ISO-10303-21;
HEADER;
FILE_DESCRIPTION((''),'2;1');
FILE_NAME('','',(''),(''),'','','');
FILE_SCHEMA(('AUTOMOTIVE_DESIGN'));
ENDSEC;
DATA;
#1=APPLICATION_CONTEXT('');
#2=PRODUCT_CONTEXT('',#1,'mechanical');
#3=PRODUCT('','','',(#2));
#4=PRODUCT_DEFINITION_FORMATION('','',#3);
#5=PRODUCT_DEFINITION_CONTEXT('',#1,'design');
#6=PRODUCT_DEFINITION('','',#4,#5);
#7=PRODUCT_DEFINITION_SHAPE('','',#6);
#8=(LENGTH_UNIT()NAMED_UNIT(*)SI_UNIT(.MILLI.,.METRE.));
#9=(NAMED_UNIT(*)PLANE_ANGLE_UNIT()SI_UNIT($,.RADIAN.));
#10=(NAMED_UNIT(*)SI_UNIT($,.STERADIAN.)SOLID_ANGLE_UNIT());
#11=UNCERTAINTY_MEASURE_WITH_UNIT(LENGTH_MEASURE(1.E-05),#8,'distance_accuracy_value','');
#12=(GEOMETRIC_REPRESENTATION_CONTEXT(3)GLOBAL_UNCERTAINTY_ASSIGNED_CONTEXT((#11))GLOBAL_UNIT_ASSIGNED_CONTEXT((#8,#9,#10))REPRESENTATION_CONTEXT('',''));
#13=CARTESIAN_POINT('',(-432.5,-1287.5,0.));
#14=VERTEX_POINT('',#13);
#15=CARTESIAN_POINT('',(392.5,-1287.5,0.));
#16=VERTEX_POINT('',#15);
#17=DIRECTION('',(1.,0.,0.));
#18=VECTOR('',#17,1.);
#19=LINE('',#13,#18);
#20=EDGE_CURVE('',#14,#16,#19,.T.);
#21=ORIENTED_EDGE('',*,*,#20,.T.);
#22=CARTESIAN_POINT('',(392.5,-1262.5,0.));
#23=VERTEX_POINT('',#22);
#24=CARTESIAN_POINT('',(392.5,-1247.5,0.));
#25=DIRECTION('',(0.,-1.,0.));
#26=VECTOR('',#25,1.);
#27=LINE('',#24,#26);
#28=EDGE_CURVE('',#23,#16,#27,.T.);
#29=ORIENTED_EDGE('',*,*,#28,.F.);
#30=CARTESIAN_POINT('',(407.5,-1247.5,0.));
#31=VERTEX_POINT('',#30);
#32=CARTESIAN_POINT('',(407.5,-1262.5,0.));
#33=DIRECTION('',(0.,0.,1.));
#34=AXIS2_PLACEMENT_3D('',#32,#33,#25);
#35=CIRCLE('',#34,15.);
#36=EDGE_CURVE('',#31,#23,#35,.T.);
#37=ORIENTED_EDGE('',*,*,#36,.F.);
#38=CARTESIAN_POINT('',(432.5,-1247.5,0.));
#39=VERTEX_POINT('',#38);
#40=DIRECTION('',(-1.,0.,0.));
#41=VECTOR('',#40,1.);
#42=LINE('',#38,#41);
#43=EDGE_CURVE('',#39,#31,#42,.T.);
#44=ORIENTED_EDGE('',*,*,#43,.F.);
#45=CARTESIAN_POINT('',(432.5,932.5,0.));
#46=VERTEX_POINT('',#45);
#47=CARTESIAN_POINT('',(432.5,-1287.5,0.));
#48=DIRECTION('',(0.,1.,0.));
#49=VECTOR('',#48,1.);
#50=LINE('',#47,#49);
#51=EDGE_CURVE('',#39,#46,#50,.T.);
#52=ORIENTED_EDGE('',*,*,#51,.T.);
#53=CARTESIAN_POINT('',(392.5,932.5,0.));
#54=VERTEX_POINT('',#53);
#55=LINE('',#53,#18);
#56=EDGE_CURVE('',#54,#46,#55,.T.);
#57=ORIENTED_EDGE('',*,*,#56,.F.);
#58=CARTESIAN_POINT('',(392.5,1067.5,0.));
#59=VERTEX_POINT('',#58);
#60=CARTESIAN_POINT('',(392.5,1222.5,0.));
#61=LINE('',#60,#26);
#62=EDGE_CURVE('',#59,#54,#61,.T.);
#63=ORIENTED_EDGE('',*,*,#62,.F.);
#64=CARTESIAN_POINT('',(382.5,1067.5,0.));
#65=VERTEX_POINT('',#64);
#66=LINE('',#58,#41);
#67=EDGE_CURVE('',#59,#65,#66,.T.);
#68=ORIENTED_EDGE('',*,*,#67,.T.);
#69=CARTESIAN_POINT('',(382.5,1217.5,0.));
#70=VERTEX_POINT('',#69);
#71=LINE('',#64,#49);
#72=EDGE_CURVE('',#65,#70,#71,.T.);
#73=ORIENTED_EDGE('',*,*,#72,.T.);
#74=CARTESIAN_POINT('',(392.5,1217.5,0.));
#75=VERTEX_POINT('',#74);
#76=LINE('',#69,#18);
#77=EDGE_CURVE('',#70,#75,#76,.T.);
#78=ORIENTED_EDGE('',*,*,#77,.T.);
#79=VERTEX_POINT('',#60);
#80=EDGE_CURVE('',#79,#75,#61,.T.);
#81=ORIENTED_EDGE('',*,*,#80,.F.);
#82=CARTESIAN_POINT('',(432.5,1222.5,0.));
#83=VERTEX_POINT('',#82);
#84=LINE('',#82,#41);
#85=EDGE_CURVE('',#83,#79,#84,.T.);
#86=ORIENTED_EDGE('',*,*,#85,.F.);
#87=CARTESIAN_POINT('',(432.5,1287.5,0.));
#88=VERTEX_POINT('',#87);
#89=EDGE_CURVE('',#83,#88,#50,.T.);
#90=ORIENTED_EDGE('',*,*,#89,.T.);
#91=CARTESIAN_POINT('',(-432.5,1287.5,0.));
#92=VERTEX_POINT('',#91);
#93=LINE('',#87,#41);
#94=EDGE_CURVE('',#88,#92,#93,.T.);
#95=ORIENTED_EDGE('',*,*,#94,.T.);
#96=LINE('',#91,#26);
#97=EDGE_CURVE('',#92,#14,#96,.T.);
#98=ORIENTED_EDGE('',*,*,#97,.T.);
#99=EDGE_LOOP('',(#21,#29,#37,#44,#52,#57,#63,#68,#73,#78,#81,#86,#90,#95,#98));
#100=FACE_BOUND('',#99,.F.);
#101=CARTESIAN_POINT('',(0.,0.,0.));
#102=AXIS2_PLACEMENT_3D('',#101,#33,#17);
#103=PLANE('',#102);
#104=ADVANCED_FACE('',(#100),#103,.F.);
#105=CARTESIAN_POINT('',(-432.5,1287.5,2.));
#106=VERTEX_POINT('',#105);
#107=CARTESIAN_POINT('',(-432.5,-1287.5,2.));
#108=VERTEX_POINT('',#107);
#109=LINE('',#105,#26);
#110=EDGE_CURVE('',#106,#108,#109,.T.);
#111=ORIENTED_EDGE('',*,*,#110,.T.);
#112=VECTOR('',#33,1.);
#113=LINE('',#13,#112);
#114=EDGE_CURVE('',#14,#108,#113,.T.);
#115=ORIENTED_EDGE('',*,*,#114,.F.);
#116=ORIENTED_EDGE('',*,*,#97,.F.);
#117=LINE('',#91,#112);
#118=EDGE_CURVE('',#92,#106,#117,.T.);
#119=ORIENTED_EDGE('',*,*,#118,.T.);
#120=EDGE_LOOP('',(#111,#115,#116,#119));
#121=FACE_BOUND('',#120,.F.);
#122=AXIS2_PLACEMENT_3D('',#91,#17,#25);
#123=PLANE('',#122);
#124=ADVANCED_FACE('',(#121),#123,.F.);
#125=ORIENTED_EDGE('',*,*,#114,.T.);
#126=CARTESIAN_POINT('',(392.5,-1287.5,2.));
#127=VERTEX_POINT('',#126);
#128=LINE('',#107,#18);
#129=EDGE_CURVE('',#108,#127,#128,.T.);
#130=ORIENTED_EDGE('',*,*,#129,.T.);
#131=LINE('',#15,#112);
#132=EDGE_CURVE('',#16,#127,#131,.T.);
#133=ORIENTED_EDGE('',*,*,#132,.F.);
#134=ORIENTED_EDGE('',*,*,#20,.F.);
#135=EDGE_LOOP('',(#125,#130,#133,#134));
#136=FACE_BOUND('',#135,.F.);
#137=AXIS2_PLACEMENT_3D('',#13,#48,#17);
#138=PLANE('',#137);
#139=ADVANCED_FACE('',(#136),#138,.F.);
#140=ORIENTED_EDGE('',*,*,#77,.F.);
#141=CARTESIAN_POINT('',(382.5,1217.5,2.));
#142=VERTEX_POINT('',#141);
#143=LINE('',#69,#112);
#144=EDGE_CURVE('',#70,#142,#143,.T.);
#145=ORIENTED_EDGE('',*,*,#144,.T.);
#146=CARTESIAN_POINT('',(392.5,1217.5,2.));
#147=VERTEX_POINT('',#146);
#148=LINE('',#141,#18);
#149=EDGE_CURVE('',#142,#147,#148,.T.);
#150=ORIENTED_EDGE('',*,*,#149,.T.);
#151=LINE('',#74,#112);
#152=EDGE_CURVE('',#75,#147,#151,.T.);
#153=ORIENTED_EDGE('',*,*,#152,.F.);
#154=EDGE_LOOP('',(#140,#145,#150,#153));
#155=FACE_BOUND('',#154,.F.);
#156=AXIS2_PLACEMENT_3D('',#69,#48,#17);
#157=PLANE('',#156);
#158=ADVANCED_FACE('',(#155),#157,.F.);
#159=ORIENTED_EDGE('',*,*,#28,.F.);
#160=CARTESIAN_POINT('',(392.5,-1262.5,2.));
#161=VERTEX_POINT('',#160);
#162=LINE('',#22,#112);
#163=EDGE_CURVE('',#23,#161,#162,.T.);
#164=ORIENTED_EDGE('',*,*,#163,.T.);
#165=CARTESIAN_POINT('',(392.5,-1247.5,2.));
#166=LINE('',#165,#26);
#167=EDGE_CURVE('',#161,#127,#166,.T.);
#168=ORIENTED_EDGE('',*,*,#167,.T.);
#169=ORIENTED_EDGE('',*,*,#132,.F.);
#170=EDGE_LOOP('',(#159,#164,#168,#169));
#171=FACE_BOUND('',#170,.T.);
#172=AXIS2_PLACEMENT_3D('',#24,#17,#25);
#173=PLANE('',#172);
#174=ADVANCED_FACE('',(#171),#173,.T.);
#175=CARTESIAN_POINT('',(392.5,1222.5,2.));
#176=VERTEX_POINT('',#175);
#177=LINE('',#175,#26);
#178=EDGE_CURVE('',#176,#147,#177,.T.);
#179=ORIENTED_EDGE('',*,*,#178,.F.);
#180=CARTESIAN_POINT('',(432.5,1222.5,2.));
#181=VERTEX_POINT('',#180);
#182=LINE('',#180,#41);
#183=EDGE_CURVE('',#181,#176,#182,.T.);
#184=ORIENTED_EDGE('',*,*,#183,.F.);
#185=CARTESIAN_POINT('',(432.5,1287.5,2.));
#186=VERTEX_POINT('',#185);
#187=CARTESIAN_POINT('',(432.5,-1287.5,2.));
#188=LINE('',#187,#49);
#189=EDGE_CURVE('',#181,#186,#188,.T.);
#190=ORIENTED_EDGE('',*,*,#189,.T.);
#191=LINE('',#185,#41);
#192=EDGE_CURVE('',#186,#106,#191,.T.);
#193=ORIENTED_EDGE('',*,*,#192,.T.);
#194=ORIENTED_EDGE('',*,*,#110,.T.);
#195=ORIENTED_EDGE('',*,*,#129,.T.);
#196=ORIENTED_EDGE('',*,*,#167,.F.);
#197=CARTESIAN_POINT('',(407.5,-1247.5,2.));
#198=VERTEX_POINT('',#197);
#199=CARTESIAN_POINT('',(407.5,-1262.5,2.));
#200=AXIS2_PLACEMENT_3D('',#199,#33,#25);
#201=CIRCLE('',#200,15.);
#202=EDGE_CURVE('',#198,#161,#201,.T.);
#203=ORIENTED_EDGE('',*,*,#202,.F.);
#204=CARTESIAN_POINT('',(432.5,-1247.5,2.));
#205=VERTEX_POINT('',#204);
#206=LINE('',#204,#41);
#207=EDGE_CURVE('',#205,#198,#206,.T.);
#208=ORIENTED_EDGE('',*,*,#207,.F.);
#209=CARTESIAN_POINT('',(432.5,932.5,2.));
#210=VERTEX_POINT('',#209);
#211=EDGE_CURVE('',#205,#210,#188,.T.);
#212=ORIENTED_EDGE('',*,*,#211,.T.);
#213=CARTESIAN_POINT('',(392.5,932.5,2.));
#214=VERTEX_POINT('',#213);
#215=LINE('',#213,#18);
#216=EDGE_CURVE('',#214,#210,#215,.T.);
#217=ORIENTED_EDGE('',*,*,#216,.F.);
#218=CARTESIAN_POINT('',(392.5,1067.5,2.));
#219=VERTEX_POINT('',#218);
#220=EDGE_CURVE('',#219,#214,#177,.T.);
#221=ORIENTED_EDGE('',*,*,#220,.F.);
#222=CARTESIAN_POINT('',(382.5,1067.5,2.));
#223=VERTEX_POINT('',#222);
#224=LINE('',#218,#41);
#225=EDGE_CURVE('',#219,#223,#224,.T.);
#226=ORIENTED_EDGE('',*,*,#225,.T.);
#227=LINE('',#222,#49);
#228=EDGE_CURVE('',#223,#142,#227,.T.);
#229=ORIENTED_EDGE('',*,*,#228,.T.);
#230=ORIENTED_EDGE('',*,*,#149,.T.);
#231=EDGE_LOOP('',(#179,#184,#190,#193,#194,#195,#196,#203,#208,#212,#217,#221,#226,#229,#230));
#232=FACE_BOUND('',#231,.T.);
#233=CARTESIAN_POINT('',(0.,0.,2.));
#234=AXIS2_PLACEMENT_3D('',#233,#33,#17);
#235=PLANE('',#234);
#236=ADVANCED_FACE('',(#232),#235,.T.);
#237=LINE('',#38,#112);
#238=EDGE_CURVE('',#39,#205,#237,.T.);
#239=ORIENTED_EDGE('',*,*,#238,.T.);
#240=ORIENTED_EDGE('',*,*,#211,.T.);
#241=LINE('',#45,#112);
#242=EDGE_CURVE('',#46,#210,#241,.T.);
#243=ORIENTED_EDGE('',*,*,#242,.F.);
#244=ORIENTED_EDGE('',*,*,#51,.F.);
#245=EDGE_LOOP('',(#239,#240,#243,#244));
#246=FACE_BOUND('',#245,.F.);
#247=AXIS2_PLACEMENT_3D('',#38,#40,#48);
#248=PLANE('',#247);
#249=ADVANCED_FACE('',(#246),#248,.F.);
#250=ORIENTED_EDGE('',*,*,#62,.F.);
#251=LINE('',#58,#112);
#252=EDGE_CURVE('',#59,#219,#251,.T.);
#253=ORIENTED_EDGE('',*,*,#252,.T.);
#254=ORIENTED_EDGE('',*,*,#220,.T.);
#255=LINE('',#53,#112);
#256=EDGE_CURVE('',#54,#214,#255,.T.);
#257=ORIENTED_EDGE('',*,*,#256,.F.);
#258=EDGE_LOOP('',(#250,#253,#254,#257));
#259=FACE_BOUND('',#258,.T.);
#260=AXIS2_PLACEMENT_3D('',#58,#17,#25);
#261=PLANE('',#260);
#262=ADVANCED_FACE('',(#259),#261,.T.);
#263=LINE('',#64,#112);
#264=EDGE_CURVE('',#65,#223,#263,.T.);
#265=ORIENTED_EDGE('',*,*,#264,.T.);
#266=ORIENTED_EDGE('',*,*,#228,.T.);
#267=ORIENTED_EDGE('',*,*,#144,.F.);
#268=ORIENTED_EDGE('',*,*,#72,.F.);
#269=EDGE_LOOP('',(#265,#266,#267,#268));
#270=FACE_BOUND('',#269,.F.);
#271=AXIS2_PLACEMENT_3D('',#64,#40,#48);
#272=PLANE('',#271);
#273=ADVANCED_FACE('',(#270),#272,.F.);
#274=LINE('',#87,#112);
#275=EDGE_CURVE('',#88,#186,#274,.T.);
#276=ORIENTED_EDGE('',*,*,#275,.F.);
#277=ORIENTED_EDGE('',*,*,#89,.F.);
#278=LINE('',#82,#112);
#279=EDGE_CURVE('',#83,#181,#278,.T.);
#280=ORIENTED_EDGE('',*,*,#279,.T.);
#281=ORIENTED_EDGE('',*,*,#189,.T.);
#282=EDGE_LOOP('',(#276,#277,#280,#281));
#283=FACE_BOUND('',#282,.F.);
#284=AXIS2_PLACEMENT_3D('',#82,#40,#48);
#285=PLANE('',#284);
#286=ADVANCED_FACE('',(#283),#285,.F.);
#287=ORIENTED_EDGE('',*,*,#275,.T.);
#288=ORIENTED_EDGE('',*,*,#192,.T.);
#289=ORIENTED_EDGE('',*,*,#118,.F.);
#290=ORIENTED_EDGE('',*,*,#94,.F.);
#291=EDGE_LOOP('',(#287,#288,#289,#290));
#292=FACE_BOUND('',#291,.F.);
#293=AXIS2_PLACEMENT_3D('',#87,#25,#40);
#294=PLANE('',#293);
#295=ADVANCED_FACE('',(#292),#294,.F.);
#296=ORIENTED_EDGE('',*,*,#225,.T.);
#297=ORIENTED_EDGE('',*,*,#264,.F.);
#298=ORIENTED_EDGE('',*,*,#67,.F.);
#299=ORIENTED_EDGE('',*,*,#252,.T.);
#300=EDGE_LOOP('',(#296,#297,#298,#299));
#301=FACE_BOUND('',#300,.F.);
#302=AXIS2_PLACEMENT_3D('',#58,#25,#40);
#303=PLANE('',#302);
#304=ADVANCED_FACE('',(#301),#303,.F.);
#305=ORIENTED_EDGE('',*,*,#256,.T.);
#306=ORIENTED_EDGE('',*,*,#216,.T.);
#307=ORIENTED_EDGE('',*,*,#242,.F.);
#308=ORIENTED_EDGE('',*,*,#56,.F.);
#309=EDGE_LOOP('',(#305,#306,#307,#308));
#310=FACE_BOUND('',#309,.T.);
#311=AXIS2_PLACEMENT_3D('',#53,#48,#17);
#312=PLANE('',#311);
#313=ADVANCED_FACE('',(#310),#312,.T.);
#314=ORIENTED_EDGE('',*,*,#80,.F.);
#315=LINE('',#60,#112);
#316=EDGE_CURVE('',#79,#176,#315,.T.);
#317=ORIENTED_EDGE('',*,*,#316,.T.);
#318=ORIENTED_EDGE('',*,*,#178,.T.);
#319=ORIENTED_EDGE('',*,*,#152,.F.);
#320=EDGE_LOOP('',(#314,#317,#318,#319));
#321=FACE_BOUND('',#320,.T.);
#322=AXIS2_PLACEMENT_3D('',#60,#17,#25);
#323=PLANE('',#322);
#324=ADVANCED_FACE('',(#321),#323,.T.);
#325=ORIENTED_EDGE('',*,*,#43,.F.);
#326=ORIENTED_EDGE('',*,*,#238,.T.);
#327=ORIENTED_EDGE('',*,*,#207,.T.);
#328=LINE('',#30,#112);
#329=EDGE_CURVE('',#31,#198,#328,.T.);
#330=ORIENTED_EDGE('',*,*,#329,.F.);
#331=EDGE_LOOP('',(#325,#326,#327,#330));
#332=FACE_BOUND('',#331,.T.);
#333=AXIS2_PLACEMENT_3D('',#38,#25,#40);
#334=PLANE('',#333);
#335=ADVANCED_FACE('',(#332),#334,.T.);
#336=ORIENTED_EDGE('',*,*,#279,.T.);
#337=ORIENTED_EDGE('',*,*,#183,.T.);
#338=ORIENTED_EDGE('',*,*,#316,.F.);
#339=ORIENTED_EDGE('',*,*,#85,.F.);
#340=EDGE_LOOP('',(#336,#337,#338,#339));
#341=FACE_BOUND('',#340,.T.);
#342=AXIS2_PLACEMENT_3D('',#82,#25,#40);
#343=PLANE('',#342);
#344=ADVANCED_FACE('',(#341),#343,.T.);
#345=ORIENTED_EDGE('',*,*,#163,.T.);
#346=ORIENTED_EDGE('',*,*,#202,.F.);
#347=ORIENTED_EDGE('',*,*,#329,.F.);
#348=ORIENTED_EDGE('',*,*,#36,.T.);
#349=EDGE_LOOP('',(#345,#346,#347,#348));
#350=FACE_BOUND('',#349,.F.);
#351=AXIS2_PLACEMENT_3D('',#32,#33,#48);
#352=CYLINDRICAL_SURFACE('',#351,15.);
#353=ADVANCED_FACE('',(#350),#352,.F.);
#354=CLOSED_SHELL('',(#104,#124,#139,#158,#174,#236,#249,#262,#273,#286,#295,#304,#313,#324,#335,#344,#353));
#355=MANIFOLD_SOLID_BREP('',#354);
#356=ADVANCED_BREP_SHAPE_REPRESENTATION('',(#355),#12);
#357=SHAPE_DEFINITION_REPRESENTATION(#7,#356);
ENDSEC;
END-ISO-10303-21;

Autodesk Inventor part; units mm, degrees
ref_plane "YZ Plane" through (0, 0, 0) normal (1, 0, 0) x (0, 1, 0)
ref_plane "XZ Plane" through (0, 0, 0) normal (0, 1, 0) x (-1, 0, 0)
ref_plane "XY Plane" through (0, 0, 0) normal (0, 0, 1) x (1, 0, 0)
sketch "Sketch1" plane through (0, 0, 0) normal (0, 0, 1) x (1, 0, 0)
  line L0 (-432.5, -1287.5) -> (432.5, -1287.5)
  line L1 (432.5, -1287.5) -> (432.5, 1287.5)
  line L2 (432.5, 1287.5) -> (-432.5, 1287.5)
  line L3 (-432.5, 1287.5) -> (-432.5, -1287.5)
  line L4 (-432.5, -1287.5) -> (432.5, 1287.5) construction
  line L5 (432.5, -1287.5) -> (-432.5, 1287.5) construction
  line L6 (432.5, -1247.5) -> (392.5, -1247.5)
  line L7 (392.5, -1247.5) -> (392.5, -1287.5)
  line L8 (432.5, 1222.5) -> (392.5, 1222.5)
  line L9 (392.5, 1222.5) -> (392.5, 932.5)
  line L10 (392.5, 932.5) -> (432.5, 932.5)
  line L11 (432.5, 932.5) -> (432.5, 1222.5)
  line L12 (392.5, 1067.5) -> (382.5, 1067.5)
  line L13 (382.5, 1067.5) -> (382.5, 1217.5)
  line L14 (382.5, 1217.5) -> (392.5, 1217.5)
  point P0 (0, 0)
  point P1 (432.5, 932.5)
  dimension "d154" = 865
  dimension "d155" = 2575
  dimension "d157" = 40
  dimension "d159" = 290
  dimension "d161" = 40
  dimension "d162" = 2220
  dimension "d163" = 10
  dimension "d164" = 150
  dimension "d165" = 5
extrude "Plate5" add sketch "Sketch1" along normal blind 2 contours L3 L2 L1 L8 L9 L14 L13 L12 L10 L6 L7 L0
fillet "Corner Round1" radius 15 1 edges at (392.5, -1247.5, 1)
properties part number "PNS-0115 floor sheet 5" material "Stainless Steel"
